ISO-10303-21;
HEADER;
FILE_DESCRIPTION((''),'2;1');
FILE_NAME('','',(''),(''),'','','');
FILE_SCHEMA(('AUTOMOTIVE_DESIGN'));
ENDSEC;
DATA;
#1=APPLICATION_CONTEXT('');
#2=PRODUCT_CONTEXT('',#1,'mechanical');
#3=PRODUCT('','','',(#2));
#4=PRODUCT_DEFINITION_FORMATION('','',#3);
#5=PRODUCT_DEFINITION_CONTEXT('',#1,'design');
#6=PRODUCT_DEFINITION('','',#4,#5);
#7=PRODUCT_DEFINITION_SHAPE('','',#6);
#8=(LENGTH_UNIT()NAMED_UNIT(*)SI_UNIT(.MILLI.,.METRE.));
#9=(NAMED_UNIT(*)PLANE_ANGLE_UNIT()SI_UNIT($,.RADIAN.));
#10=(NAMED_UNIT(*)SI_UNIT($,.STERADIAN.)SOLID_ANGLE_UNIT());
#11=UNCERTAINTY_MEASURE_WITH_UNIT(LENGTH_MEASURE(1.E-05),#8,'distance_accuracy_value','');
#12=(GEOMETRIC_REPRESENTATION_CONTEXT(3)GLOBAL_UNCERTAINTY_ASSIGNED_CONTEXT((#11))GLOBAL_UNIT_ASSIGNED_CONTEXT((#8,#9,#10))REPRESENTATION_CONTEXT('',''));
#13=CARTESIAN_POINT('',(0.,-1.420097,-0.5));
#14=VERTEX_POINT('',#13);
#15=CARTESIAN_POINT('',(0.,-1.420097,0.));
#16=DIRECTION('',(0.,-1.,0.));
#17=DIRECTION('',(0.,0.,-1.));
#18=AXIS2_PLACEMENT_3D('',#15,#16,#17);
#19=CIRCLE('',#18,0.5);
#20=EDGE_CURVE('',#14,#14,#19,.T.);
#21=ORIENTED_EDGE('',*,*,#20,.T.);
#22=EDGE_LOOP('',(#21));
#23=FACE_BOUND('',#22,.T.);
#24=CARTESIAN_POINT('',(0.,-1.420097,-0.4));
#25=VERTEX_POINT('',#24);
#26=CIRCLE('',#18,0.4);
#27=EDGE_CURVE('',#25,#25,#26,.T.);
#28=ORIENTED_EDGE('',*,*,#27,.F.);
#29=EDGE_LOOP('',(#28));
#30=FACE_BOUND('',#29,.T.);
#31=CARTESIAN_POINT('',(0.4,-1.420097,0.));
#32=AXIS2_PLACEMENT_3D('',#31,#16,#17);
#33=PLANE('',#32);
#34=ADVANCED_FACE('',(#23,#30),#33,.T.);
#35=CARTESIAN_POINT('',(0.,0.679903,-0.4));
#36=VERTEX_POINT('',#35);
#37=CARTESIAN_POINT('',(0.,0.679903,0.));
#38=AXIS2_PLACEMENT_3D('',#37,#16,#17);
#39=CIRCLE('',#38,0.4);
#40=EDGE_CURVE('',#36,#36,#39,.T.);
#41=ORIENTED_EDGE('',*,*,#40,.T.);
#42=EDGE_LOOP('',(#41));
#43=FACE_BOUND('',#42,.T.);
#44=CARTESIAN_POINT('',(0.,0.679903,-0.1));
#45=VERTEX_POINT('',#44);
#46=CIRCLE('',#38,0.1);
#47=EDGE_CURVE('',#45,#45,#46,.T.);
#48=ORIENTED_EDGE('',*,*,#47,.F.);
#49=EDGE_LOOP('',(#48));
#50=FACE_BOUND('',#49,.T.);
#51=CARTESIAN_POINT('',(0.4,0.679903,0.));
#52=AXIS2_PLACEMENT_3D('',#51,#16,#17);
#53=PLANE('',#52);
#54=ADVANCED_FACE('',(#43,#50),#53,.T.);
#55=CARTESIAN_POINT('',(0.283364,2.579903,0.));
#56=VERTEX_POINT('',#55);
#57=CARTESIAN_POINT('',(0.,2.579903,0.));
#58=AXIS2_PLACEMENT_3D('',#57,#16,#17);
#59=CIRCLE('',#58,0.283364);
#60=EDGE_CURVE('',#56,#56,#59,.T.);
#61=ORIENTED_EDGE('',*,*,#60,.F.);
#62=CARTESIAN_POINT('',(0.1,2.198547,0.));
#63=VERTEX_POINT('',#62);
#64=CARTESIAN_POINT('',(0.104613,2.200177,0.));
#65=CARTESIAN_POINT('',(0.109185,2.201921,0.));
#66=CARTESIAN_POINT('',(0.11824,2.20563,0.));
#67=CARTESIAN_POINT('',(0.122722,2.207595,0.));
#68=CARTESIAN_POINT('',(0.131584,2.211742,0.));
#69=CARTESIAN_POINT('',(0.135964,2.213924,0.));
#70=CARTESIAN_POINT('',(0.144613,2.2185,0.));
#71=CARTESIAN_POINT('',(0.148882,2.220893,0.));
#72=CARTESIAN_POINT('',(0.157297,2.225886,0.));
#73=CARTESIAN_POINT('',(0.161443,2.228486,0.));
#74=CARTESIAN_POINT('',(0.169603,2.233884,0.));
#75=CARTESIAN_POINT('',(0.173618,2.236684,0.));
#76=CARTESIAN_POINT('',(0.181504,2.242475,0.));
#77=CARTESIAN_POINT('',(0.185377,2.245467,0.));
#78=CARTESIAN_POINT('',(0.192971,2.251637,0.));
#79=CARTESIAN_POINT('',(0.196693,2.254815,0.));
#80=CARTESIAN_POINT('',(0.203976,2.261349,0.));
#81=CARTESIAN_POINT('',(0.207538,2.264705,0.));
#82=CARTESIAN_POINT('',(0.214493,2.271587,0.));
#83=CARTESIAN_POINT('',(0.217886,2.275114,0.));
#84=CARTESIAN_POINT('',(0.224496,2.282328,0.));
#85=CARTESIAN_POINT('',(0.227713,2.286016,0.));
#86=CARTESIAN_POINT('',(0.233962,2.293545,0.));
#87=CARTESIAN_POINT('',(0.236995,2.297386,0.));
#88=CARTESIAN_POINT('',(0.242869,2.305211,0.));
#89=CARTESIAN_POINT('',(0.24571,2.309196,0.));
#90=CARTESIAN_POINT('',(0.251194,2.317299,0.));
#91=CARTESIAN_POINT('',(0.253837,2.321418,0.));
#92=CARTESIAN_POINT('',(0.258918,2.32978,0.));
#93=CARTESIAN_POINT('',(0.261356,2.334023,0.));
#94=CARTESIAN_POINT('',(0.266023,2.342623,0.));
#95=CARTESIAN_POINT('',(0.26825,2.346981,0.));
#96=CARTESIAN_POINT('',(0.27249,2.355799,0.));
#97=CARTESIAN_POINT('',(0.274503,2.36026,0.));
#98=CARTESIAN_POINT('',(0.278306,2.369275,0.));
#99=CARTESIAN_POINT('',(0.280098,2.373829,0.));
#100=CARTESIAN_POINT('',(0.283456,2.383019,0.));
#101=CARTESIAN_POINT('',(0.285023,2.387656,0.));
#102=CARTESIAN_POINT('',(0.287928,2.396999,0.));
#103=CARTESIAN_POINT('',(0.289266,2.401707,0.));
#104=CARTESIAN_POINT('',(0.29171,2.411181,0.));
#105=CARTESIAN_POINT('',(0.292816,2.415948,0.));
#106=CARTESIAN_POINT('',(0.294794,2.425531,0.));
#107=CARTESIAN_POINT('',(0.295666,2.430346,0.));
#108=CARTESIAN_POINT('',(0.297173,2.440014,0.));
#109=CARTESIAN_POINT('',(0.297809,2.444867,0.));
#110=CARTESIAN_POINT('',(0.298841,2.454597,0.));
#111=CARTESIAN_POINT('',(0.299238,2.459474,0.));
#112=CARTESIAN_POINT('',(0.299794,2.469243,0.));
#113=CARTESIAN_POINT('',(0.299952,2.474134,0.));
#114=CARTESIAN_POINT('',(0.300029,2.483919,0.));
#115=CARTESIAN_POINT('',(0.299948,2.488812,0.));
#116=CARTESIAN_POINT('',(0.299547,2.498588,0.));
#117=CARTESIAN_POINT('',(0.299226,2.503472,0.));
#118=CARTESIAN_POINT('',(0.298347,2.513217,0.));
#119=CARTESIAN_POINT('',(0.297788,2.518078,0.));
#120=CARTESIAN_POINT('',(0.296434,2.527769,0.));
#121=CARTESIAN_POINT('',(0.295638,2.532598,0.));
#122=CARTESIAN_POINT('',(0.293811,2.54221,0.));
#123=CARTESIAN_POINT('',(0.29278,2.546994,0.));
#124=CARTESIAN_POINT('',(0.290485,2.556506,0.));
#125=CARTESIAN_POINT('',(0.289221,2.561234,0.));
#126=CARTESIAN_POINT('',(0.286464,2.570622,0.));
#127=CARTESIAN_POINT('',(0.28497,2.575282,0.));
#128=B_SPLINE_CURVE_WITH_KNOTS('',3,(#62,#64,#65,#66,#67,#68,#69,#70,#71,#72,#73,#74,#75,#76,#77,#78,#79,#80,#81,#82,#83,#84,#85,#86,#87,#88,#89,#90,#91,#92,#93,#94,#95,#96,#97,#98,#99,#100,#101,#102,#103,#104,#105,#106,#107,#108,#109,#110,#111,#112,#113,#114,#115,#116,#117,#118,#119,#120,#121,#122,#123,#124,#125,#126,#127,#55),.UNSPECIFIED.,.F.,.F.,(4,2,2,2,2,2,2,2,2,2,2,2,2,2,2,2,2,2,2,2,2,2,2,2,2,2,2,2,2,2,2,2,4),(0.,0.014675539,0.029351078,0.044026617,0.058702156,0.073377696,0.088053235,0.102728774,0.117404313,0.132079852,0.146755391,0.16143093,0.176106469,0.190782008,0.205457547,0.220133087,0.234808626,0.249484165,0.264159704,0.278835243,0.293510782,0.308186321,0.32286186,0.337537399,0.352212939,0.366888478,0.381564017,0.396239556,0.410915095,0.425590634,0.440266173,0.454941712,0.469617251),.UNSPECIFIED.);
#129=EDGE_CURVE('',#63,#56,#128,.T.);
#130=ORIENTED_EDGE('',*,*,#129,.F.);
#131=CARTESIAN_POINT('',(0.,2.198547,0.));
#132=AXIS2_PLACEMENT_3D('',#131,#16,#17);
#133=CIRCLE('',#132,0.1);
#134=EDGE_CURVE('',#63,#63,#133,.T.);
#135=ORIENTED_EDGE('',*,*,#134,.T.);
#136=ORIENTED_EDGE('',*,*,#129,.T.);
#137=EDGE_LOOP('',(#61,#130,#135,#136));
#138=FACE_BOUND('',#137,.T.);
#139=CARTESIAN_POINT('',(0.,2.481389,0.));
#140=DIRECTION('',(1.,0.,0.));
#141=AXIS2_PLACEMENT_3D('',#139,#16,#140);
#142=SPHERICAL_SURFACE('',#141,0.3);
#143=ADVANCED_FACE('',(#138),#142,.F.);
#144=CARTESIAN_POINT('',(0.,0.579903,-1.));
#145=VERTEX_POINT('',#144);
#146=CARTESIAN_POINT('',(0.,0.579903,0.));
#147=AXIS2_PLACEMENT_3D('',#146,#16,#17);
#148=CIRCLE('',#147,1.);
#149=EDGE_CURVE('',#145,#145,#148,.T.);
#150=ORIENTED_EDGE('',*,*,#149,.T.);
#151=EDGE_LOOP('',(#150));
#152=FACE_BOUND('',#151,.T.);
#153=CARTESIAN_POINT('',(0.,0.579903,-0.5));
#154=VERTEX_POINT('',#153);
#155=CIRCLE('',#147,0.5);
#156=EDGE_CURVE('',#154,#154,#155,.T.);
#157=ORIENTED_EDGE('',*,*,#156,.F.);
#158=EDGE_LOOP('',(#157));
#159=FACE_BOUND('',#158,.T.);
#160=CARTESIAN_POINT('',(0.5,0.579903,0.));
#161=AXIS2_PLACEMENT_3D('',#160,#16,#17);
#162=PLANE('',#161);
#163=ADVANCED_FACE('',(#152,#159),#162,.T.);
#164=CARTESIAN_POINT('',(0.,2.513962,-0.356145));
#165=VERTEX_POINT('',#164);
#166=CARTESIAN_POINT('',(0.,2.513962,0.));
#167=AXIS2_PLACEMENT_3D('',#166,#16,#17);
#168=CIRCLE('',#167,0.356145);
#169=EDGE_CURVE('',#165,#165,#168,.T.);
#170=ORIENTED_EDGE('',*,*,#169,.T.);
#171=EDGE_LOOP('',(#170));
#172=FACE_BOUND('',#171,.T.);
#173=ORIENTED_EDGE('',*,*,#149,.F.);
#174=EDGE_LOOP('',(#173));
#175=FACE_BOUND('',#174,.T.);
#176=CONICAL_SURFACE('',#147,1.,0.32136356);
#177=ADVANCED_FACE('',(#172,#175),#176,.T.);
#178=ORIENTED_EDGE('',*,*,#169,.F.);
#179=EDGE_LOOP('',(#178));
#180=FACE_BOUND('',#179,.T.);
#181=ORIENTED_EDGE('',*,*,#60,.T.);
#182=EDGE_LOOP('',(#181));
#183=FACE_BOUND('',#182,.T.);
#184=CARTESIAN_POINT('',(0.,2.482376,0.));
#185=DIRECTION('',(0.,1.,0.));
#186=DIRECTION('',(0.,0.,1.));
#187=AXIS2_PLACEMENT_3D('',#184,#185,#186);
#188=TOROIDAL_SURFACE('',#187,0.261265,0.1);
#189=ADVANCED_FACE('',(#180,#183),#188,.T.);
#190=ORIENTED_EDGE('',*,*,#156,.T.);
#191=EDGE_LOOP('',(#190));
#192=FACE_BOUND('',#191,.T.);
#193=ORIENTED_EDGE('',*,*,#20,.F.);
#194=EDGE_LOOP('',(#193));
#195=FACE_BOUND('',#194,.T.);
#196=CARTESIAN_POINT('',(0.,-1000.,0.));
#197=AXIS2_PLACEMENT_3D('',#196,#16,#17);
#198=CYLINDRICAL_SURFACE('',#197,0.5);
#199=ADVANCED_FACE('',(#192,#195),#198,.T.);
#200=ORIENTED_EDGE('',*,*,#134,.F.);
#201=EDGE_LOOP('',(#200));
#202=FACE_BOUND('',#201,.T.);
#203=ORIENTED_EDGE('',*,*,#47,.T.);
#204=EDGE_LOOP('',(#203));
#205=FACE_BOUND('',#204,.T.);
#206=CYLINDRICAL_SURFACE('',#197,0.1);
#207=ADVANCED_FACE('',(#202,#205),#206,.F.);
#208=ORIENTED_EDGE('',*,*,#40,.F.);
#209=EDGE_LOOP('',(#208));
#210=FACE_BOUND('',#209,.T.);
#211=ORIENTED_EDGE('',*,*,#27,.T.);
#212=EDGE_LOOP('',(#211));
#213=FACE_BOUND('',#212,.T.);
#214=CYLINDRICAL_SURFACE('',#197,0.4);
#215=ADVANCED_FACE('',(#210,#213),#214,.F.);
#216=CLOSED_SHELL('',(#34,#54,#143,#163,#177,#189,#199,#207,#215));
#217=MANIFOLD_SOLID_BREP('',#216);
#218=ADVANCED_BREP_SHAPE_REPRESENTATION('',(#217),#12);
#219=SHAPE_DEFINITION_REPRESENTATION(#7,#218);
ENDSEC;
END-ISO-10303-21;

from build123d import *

# Parameters (mm, degrees)
REDONDEO1_R = 0.1


with BuildPart() as part:
    # Croquis1 → Revolución1 (revolve)
    with BuildSketch(Plane.XY, mode=Mode.PRIVATE) as revoluci_n1_sk:
        with BuildLine():
            Line((0.39999999999987756, -1.4200968373354317), (0.39999999999987756, 0.6799031626646908))
            Line((0.39999999999987756, 0.6799031626646908), (0.09999999999987759, 0.6799031626646908))
            Line((0.09999999999987759, 0.6799031626646908), (0.09999999999987759, 2.1985465652935696))
            ThreePointArc((0.09999999999987759, 2.1985465652935696), (0.2703704027459185, 2.3513898726964784), (0.28336374941518433, 2.5799031626645688))
            Line((0.28336374941518433, 2.5799031626645688), (0.33419321065036695, 2.5799031626645688))
            Line((0.33419321065036695, 2.5799031626645688), (1, 0.5799031626645683))
            Line((1, 0.5799031626645683), (0.5, 0.5799031626645683))
            Line((0.5, 0.5799031626645683), (0.5, -1.4200968373354317))
            Line((0.5, -1.4200968373354317), (0.39999999999987756, -1.4200968373354317))
        make_face()
    revolve(revoluci_n1_sk.sketch.rotate(Axis((0, -1000, 0), (0, 1, 0)), 90), axis=Axis((0, -1000, 0), (0, 1, 0)))

    # Redondeo1
    # the kernel refuses this fillet: 0.1 mm, written as the material it takes off along each edge
    with BuildSketch(Plane(origin=(0, 2.57990316266455, 0), x_dir=(1.1e-16, 0, -1), z_dir=(1, 0, 1.1e-16))) as redondeo1_piece_1:
        with BuildLine():
            CenterArc((0.26126482017864594, -0.09752762340280041), REDONDEO1_R, 18.412775660574653, 58.82007881001293)
            Line((0.28336374941518433, 0), (0.2838057279999151, 0.00195055246805609))
            ThreePointArc((0.2838057279999151, 0.00195055246805609), (0.30877848003277564, 0.00199999999999978), (0.33419321065036695, 0.00199999999999978))
            Line((0.33419321065036695, 0.00199999999999978), (0.33609082186131406, 0.00063172121389732))
            Line((0.33609082186131406, 0.00063172121389732), (0.3580429919369484, -0.06530984149403896))
            Line((0.3580429919369484, -0.06530984149403896), (0.35614538072600127, -0.06594156270793627))
        make_face()
    revolve(axis=Axis((0, 2.57990316266455, 0), (0, 1, 0)), mode=Mode.SUBTRACT)


solid = part.part
